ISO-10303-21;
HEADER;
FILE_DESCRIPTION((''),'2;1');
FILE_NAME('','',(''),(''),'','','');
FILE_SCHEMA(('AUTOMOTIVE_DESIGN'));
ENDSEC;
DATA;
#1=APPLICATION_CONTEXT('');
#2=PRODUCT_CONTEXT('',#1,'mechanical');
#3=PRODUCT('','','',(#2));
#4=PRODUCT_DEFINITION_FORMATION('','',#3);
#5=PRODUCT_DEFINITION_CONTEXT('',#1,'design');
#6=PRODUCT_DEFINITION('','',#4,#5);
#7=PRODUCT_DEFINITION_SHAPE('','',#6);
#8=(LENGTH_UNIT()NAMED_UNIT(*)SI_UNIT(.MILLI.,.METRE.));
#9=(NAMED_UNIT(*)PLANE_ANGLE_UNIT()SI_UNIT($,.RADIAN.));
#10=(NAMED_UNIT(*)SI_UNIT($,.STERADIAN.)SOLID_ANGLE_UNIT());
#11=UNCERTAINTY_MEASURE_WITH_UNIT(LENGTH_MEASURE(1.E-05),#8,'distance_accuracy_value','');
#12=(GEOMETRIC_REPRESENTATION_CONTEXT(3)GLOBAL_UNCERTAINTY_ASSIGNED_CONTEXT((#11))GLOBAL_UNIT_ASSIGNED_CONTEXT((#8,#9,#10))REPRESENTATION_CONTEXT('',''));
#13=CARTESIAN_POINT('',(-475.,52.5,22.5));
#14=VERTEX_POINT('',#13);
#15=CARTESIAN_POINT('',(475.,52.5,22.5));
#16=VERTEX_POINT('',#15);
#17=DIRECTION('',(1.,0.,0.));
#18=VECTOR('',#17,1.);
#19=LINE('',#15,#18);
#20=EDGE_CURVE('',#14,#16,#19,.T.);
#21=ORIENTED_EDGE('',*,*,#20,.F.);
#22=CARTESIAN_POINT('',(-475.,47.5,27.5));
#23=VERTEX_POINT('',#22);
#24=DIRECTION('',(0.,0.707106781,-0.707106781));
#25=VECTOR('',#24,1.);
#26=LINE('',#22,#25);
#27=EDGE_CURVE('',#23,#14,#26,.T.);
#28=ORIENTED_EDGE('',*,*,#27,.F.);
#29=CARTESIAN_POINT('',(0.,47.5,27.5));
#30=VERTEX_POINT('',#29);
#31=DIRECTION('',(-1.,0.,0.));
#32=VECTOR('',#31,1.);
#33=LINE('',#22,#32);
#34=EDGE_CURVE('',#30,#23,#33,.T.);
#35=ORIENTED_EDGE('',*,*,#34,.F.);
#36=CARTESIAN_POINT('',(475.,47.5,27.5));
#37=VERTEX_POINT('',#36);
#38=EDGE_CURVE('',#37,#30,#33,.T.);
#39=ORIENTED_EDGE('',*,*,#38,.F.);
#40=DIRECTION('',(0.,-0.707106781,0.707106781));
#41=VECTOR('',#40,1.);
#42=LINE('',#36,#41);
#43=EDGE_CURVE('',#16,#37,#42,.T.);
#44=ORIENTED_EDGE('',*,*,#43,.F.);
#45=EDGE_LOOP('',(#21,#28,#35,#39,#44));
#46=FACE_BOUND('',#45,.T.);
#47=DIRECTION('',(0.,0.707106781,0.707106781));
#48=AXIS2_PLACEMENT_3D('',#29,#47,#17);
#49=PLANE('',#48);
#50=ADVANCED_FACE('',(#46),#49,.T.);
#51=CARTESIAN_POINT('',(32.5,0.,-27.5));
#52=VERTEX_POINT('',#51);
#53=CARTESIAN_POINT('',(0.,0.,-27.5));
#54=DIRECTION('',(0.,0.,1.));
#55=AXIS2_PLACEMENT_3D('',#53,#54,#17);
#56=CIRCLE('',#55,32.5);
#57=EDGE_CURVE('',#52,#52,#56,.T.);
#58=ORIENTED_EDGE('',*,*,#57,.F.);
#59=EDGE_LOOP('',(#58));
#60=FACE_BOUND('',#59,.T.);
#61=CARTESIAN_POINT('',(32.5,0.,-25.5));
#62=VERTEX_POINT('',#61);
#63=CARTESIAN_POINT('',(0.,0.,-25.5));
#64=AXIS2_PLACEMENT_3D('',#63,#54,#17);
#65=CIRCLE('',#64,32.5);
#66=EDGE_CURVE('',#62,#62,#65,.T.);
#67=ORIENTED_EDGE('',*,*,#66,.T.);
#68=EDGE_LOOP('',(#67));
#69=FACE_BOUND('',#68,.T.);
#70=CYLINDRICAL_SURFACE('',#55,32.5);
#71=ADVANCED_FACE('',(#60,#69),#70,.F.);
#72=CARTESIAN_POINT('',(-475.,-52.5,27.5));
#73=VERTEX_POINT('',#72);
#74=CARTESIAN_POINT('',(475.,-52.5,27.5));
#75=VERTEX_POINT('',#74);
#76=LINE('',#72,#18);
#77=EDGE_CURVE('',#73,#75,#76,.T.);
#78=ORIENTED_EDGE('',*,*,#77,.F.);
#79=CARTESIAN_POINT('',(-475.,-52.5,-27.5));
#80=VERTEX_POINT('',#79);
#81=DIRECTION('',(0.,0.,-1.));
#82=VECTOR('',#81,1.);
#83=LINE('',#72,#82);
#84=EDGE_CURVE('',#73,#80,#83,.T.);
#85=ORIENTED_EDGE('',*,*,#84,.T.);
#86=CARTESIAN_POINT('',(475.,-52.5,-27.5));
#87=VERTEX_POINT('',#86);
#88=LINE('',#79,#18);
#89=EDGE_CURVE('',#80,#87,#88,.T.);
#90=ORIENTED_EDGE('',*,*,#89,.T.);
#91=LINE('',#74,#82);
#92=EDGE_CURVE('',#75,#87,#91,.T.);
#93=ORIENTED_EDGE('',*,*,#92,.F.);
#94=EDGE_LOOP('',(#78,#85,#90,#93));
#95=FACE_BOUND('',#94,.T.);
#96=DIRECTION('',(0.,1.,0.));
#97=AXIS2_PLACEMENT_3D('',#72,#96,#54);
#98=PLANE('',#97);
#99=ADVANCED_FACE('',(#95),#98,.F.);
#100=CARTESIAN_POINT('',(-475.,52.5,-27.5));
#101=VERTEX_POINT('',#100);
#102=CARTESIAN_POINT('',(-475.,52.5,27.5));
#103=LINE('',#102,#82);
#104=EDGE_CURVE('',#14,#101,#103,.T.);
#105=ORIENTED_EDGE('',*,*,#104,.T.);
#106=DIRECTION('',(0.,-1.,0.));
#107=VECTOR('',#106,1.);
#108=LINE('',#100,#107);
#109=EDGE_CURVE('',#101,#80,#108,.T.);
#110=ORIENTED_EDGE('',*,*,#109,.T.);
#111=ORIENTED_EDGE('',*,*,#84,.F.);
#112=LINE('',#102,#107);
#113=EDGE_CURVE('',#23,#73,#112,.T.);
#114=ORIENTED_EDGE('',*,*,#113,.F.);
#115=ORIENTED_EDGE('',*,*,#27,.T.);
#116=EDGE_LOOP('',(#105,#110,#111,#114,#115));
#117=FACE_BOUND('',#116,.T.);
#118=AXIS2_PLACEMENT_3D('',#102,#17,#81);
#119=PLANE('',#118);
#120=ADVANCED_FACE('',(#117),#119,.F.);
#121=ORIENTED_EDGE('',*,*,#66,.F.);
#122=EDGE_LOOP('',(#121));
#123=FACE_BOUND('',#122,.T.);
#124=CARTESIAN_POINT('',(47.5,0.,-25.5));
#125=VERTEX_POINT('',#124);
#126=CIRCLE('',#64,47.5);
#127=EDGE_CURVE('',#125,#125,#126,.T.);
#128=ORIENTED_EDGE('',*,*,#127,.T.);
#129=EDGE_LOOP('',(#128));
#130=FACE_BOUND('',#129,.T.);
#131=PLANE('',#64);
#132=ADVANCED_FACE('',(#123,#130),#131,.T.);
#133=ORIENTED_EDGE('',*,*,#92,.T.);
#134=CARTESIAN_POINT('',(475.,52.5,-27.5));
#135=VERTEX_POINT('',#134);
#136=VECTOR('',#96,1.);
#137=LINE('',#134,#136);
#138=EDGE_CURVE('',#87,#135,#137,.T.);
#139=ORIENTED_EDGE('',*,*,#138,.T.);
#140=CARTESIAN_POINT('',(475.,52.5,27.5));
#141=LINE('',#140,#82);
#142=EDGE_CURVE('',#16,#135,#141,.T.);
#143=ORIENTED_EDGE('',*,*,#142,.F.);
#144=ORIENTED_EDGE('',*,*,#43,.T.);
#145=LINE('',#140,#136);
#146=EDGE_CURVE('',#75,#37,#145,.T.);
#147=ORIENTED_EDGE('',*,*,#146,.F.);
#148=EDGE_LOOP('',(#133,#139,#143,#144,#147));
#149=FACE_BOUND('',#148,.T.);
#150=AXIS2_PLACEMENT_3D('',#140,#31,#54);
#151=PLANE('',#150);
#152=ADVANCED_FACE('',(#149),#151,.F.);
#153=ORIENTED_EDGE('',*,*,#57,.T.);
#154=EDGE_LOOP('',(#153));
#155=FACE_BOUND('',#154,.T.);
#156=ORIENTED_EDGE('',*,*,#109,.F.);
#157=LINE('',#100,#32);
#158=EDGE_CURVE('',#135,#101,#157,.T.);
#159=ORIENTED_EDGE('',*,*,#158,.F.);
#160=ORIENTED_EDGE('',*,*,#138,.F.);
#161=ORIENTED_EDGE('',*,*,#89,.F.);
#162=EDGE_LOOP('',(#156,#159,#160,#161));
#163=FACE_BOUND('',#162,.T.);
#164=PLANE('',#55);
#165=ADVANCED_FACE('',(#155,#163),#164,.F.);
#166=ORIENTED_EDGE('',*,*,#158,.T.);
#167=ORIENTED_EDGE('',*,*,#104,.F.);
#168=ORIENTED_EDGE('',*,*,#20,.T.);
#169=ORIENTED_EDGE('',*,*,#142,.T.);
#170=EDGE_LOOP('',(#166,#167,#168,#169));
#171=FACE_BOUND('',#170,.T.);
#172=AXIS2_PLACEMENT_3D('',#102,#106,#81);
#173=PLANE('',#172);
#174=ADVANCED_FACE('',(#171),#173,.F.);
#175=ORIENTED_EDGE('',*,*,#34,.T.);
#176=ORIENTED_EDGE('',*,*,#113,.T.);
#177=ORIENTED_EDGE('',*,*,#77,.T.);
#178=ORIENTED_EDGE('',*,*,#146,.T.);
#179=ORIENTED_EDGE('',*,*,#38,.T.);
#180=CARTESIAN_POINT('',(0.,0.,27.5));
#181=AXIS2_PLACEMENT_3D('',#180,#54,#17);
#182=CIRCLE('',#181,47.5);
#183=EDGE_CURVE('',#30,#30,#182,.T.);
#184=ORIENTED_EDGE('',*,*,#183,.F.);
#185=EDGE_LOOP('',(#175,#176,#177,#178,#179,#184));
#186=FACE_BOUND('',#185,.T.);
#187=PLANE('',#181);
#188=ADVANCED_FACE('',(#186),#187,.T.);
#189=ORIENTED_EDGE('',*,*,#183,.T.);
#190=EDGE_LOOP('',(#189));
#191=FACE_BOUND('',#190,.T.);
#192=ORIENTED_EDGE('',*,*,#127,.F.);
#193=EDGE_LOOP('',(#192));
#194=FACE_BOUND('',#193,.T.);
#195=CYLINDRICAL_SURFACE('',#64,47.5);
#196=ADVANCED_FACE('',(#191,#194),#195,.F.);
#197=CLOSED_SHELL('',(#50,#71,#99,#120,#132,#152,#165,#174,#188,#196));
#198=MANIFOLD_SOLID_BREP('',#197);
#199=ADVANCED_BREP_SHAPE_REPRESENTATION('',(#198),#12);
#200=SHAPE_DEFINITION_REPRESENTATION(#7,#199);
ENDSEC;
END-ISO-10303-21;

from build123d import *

# Parameters (mm, degrees)
SKETCH1_W           = 950
SKETCH1_H           = 105
BOSS_EXTRUDE1_DEPTH = 27.5
SKETCH2_R           = 47.5
CUT_EXTRUDE1_DEPTH  = 53
SKETCH3_R           = 32.5
CUT_EXTRUDE2_DEPTH  = 481.822472437
CHAMFER1_SIZE       = 5


with BuildPart() as part:
    # Sketch1 → Boss-Extrude1 (new, symmetric)
    with BuildSketch(Plane.XY):
        Rectangle(SKETCH1_W, SKETCH1_H)
    extrude(amount=BOSS_EXTRUDE1_DEPTH, both=True)

    # Sketch2 → Cut-Extrude1 (cut)
    with BuildSketch(Plane.XY.offset(27.5)):
        Circle(SKETCH2_R)
    extrude(amount=-CUT_EXTRUDE1_DEPTH, mode=Mode.SUBTRACT)

    # Sketch3 → Cut-Extrude2 (cut, through all)
    with BuildSketch(Plane.XY.offset(-25.5)):
        Circle(SKETCH3_R)
    extrude(amount=-CUT_EXTRUDE2_DEPTH, mode=Mode.SUBTRACT)

    # Chamfer1
    chamfer1_edges = [part.edges().sort_by_distance(p)[0] for p in [
        (0, 52.5, 27.5),
    ]]
    chamfer(chamfer1_edges, length=CHAMFER1_SIZE - 0.0001)  # a hair under: the kernel refuses the full size


solid = part.part
